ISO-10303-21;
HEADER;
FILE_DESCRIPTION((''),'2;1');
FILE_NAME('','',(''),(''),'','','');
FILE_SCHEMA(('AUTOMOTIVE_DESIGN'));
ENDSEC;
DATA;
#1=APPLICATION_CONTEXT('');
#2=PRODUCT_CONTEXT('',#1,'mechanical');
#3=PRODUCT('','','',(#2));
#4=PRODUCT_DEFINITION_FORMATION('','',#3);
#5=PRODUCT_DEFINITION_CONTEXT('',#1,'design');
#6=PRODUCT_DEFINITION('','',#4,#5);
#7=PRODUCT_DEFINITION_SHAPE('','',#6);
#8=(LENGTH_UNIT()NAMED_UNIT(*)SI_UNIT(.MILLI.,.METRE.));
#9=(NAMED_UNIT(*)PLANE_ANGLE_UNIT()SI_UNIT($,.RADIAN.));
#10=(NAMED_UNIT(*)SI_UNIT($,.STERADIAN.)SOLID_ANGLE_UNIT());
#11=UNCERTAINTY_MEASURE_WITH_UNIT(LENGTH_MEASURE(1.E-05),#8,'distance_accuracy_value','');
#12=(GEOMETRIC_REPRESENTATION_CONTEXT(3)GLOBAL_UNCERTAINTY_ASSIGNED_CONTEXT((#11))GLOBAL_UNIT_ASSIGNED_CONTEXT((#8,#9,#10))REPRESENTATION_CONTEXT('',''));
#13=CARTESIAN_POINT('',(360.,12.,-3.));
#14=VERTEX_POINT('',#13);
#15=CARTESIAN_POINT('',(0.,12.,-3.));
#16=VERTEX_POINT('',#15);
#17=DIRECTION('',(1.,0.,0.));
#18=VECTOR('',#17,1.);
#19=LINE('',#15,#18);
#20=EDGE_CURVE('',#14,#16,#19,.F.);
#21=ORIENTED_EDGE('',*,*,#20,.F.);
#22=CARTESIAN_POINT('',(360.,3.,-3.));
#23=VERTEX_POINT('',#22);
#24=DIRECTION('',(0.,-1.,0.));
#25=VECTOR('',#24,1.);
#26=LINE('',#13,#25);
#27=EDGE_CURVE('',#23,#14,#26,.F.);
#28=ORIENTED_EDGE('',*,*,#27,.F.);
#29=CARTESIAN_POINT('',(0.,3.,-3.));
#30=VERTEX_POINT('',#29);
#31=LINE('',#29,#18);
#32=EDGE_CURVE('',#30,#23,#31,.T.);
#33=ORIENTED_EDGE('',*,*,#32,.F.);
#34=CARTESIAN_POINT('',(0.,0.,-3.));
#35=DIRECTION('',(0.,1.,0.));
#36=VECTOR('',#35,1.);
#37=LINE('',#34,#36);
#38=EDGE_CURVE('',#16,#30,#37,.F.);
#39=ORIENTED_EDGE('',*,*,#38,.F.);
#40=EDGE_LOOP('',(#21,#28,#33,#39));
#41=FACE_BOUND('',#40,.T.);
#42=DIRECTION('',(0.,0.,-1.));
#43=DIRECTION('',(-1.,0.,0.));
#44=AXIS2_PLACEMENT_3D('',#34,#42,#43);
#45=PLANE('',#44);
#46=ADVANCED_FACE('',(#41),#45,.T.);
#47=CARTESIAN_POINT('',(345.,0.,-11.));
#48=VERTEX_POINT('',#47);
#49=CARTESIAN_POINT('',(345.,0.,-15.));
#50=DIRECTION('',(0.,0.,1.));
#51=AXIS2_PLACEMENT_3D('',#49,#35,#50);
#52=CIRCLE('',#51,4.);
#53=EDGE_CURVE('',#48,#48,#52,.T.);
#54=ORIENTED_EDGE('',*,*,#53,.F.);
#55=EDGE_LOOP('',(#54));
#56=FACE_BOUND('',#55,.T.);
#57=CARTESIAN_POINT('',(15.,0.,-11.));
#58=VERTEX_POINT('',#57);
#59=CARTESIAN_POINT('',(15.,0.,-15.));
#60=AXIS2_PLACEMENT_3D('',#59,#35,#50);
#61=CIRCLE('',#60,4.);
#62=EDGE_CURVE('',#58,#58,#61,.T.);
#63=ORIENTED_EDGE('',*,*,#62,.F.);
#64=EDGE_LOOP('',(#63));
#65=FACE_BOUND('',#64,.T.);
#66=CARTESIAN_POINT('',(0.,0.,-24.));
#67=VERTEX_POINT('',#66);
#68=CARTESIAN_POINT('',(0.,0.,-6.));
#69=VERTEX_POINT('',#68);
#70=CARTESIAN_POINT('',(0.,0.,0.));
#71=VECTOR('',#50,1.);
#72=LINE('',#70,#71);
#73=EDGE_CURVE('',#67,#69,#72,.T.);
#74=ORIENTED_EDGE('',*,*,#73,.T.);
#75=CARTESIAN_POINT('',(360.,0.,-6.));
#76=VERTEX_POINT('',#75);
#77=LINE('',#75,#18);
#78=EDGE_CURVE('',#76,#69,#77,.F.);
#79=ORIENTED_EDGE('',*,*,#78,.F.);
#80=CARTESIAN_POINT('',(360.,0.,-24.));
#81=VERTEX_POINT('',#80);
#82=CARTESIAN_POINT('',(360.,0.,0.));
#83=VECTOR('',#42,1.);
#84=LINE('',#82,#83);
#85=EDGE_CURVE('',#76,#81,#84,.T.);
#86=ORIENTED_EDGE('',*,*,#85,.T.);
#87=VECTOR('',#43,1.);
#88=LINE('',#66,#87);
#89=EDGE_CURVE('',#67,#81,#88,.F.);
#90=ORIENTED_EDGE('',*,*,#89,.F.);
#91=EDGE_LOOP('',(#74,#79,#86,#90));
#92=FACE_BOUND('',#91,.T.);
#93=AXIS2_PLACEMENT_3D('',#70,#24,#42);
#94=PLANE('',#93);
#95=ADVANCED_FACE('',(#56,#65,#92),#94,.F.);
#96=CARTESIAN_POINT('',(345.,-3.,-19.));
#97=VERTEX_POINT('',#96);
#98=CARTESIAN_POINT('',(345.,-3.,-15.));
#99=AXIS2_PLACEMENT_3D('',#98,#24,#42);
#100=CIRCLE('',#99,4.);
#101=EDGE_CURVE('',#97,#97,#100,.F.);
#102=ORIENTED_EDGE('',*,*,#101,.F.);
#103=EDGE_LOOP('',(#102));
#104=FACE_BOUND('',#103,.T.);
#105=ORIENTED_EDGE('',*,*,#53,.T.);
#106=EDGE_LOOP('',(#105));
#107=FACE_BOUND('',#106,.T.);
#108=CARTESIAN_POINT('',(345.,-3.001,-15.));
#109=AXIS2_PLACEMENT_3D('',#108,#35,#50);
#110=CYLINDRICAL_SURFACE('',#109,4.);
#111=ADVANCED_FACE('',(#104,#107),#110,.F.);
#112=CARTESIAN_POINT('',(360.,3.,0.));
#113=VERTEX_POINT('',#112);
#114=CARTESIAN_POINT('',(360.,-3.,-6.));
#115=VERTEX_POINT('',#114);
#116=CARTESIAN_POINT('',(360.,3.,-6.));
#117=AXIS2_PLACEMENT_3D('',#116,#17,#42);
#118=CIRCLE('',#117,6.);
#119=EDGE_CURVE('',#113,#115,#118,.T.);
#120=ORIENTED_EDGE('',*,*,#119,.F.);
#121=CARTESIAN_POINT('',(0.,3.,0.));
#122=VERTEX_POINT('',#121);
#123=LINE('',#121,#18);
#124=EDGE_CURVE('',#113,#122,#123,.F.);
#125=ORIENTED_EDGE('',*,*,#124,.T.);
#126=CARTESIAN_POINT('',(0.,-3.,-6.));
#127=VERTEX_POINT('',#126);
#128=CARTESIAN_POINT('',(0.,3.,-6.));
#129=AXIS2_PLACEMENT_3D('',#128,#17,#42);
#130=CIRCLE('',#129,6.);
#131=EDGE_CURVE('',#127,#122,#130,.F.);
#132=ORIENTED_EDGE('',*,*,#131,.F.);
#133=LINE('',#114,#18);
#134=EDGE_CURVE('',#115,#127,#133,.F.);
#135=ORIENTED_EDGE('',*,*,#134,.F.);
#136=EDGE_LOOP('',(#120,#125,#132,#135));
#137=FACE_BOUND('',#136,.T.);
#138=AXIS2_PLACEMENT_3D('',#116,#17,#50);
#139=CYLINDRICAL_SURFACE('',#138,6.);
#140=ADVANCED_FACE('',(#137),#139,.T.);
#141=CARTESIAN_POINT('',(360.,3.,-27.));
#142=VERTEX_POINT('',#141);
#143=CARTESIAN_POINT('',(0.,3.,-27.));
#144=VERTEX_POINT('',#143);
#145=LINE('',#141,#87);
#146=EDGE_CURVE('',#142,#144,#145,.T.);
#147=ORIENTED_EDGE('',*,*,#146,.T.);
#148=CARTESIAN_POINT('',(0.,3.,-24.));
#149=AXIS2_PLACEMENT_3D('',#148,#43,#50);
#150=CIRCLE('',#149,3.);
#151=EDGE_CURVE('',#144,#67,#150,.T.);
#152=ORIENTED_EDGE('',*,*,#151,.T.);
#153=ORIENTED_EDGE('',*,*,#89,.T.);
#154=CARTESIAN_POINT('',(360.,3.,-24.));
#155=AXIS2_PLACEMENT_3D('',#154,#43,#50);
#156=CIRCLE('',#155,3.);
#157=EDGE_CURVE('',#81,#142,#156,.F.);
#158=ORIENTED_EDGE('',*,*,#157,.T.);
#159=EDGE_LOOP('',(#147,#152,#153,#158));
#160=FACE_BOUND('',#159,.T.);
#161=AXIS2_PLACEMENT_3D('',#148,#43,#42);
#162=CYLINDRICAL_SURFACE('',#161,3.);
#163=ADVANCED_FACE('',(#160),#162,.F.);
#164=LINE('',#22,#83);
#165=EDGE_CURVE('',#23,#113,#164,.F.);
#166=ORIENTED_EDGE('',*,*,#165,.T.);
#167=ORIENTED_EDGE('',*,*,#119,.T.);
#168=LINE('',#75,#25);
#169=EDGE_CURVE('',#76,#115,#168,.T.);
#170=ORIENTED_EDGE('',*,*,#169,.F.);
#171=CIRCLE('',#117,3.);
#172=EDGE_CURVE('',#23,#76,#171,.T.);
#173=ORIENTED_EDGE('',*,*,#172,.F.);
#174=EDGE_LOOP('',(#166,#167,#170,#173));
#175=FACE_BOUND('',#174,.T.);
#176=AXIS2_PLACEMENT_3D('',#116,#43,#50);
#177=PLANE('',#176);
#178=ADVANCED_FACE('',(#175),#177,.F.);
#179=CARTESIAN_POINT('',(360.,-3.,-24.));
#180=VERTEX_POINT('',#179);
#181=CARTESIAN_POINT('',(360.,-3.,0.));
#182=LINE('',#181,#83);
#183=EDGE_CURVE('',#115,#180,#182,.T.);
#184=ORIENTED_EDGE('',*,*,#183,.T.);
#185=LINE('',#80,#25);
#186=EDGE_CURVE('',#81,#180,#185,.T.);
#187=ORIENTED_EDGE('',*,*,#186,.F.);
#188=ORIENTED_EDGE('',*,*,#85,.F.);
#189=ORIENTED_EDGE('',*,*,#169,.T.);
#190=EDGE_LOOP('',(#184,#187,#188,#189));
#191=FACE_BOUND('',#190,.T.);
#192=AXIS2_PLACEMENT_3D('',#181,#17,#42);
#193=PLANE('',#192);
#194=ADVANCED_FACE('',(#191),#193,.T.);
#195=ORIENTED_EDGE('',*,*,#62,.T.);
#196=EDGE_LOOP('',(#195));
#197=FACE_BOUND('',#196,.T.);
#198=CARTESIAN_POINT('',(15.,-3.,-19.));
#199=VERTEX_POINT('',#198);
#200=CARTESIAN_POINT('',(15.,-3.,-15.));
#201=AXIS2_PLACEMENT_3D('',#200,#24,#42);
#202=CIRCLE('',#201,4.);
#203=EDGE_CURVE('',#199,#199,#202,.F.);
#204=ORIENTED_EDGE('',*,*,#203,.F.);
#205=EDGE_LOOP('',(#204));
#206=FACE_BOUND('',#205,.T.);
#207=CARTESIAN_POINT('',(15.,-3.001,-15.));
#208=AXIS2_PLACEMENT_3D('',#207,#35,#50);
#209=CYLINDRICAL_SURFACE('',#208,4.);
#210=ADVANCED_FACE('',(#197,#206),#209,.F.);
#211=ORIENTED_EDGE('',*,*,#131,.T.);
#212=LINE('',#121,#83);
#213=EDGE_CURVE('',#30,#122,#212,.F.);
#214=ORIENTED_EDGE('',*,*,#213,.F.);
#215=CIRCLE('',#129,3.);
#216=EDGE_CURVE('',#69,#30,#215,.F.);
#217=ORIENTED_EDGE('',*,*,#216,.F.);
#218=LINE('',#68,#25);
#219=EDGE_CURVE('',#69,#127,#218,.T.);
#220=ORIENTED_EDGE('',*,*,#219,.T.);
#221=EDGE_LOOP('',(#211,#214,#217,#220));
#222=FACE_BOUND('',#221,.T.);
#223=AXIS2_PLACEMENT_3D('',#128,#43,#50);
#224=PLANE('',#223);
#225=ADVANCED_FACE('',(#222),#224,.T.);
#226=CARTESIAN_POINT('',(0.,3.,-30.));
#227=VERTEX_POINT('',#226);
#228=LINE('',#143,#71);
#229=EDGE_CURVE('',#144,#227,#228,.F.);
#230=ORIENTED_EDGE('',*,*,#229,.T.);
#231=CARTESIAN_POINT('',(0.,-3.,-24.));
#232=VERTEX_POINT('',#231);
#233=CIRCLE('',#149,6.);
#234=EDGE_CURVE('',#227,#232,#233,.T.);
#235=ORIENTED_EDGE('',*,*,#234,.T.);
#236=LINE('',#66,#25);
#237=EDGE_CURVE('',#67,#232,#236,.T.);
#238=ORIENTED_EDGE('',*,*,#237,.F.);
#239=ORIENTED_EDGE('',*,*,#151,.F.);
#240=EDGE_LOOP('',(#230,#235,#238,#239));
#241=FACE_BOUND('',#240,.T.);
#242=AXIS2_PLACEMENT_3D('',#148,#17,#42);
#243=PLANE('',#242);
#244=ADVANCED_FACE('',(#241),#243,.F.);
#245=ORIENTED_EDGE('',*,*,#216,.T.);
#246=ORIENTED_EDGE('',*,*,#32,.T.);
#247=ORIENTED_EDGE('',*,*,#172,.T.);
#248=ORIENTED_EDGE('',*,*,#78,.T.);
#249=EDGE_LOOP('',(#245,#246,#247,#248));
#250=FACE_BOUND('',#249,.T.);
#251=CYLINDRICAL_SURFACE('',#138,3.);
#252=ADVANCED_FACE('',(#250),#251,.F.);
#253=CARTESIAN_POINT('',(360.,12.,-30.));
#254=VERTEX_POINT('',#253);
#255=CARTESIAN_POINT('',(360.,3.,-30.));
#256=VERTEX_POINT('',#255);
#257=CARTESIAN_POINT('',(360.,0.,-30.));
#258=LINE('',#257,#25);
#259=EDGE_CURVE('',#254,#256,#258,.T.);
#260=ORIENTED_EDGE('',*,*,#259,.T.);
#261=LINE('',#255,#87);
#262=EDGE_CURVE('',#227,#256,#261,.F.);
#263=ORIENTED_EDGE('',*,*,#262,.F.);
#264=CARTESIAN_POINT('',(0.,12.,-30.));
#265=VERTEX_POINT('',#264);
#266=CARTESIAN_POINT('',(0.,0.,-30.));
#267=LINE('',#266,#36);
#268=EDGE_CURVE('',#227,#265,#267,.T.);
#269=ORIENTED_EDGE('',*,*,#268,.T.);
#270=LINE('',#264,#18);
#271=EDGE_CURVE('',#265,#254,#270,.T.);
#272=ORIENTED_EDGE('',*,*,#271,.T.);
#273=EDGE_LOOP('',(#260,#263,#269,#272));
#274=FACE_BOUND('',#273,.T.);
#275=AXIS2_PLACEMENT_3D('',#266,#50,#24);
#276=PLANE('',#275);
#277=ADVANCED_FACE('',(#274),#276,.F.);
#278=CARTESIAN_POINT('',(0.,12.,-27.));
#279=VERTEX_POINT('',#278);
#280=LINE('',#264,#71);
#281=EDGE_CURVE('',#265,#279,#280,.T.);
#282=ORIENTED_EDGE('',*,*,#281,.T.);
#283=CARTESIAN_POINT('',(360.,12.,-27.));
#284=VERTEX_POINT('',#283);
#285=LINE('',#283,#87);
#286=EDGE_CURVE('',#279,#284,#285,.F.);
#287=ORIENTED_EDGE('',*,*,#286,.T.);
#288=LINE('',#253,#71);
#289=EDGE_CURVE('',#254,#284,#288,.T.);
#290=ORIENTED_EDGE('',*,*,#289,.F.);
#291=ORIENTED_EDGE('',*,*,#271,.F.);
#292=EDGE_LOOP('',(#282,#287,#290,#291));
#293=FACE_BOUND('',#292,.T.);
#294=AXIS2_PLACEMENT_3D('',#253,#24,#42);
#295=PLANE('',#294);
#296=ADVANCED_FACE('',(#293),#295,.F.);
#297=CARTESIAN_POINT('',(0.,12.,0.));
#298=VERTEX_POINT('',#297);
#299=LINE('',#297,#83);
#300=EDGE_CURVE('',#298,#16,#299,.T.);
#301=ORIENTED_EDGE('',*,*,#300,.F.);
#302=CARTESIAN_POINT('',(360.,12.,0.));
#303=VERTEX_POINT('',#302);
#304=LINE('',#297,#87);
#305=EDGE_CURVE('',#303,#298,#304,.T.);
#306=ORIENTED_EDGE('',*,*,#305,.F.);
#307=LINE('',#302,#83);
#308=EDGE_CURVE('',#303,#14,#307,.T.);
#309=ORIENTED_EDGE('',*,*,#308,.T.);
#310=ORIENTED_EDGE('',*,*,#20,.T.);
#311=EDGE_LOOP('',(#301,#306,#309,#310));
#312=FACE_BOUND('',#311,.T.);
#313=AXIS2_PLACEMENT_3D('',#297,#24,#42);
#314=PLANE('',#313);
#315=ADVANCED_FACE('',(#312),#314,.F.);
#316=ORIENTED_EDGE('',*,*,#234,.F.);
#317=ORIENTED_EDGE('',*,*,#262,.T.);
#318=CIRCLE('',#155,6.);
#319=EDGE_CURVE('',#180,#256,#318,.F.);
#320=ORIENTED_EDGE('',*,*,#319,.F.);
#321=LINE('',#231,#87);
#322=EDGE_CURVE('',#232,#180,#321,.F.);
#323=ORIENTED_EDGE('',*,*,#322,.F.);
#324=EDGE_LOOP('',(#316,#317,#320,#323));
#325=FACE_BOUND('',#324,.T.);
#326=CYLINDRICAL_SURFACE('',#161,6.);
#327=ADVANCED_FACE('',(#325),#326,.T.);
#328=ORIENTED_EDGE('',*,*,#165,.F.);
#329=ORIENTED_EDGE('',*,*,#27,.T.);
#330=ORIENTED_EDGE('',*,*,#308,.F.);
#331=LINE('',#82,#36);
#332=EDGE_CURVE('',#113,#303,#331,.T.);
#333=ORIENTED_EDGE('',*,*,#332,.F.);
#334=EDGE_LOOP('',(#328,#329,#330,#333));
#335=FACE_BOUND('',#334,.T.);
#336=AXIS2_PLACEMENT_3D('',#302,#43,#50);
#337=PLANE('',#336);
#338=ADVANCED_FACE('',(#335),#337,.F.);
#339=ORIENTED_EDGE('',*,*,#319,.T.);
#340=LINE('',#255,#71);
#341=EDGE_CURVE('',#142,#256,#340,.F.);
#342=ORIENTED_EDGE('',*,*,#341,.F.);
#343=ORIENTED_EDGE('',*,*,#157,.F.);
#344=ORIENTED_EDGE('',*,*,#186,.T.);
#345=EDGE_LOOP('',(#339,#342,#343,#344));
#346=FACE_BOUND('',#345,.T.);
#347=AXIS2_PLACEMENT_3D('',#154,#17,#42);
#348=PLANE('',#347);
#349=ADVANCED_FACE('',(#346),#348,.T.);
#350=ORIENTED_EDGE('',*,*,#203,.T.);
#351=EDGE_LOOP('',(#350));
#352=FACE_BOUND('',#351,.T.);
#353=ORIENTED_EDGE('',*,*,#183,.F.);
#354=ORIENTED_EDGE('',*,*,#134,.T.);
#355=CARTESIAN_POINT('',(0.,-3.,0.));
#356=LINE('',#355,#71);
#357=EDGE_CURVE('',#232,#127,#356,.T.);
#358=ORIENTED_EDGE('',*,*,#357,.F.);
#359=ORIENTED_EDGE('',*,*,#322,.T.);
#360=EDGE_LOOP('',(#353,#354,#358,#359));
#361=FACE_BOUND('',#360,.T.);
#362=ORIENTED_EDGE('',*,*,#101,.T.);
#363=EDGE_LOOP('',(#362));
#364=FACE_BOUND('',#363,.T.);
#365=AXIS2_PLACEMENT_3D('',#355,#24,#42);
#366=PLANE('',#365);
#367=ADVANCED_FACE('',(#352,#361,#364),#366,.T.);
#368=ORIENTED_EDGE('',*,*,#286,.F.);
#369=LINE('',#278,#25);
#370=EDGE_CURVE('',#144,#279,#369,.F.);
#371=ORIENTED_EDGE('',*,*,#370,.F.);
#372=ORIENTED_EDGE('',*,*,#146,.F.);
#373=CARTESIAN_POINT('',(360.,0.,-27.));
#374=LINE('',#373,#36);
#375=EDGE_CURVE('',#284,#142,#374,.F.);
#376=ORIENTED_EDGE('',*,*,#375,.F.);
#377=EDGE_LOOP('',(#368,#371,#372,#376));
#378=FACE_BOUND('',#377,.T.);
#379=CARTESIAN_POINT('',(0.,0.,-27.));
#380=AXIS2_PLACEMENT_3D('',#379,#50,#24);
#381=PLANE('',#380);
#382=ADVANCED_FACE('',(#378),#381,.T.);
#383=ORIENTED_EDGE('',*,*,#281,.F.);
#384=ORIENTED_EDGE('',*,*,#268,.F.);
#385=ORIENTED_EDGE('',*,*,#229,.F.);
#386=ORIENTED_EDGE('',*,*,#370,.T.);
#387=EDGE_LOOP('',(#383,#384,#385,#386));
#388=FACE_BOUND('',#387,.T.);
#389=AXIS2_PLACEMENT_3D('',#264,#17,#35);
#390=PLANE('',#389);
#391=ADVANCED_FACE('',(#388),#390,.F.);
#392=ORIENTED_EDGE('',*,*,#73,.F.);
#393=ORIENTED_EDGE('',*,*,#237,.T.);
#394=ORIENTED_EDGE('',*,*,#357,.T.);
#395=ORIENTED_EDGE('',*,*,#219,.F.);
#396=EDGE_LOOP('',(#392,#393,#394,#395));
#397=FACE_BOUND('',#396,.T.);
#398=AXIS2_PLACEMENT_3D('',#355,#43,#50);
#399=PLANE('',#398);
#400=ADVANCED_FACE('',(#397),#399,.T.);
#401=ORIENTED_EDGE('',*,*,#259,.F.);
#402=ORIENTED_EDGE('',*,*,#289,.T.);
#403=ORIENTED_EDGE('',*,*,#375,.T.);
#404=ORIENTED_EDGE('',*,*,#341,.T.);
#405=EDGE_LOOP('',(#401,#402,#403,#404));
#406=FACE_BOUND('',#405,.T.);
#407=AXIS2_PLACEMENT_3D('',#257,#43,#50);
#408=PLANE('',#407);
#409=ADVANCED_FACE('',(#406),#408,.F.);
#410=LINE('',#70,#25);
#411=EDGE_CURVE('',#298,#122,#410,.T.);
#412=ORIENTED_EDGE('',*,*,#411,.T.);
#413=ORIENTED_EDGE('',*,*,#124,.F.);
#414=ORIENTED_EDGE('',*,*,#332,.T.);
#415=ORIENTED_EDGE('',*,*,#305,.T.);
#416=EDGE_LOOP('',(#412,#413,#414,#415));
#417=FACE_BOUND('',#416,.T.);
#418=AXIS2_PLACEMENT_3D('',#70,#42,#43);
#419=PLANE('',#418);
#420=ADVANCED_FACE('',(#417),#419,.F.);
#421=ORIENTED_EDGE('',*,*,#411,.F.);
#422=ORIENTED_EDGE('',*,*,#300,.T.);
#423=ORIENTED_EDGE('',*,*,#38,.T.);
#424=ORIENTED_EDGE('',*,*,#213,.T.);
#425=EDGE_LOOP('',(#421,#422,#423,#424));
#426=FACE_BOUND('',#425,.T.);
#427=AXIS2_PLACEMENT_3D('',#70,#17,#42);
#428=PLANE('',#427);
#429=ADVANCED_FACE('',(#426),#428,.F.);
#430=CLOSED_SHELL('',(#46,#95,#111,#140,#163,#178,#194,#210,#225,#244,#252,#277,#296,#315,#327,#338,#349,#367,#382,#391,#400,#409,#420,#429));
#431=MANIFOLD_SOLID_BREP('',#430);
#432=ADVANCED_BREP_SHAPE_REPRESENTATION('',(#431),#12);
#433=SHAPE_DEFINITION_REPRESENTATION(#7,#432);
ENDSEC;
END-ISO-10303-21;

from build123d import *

# Parameters (mm, degrees)
ESQUISSE2_W                             = 360
ESQUISSE2_H                             = 30
T_LE_DE_BASE_PLI_E1_DEPTH               = 3
T_LE_PLI_E_SUR_AR_TE1_STRIP_W           = 18
T_LE_PLI_E_SUR_AR_TE1_STRIP_H           = 3
T_LE_PLI_E_SUR_AR_TE1_STRIP_CUT_DEPTH   = 360
T_LE_PLI_E_SUR_AR_TE1_STRIP_2_W         = 18
T_LE_PLI_E_SUR_AR_TE1_STRIP_2_H         = 3
T_LE_PLI_E_SUR_AR_TE1_STRIP_CUT_2_DEPTH = 360
T_LE_PLI_E_SUR_AR_TE1_DEPTH             = 360
T_LE_PLI_E_SUR_AR_TE1_BEND_DEPTH        = 360
ENL_V_MAT_EXTRU_1_REACH                 = 363.447
ESQUISSE10_R                            = 4


# Sheet-metal steps are written as plain solids
with BuildPart() as part:
    # Esquisse2 → Tôle de base pliée1 (new body)
    with BuildSketch(Plane(origin=(0, 0, 0), x_dir=(1, 0, 0), z_dir=(0, 1, 0))):
        with Locations((180, 15)):
            Rectangle(ESQUISSE2_W, ESQUISSE2_H)
    extrude(amount=-T_LE_DE_BASE_PLI_E1_DEPTH)

    # Tôle pliée sur arête1 strip (across the edge) → Tôle pliée sur arête1 strip cut (cut)
    with BuildSketch(Plane(origin=(0, 0, 0), x_dir=(0, 0, -1), z_dir=(1, 0, 0))):
        with Locations((-3, -1.5)):
            Rectangle(T_LE_PLI_E_SUR_AR_TE1_STRIP_W, T_LE_PLI_E_SUR_AR_TE1_STRIP_H)
    extrude(amount=T_LE_PLI_E_SUR_AR_TE1_STRIP_CUT_DEPTH, mode=Mode.SUBTRACT)

    # Tôle pliée sur arête1 strip 2 (across the edge) → Tôle pliée sur arête1 strip cut 2 (cut)
    with BuildSketch(Plane(origin=(360, 0, -30), x_dir=(0, 0, 1), z_dir=(-1, 0, 0))):
        with Locations((-3, -1.5)):
            Rectangle(T_LE_PLI_E_SUR_AR_TE1_STRIP_2_W, T_LE_PLI_E_SUR_AR_TE1_STRIP_2_H)
    extrude(amount=T_LE_PLI_E_SUR_AR_TE1_STRIP_CUT_2_DEPTH, mode=Mode.SUBTRACT)

    # Tôle pliée sur arête1 section (across the edge) → Tôle pliée sur arête1 (add)
    with BuildSketch(Plane(origin=(0, 0, 0), x_dir=(0, 0, -1), z_dir=(1, 0, 0))):
        with BuildLine():
            Line((0, 3), (0, 12))
            Line((0, 12), (3, 12))
            Line((3, 12), (3, 3))
            ThreePointArc((3, 3), (3.878679656, 0.878679656), (6, 0))
            Line((6, 0), (6, -3))
            ThreePointArc((6, -3), (1.757359313, -1.242640687), (0, 3))
        make_face()
    extrude(amount=T_LE_PLI_E_SUR_AR_TE1_DEPTH)

    # Tôle pliée sur arête1 section 2 (across the edge) → Tôle pliée sur arête1 bend (add)
    with BuildSketch(Plane(origin=(360, 0, -30), x_dir=(0, 0, 1), z_dir=(-1, 0, 0))):
        with BuildLine():
            Line((0, 3), (0, 12))
            Line((0, 12), (3, 12))
            Line((3, 12), (3, 3))
            ThreePointArc((3, 3), (3.878679656, 0.878679656), (6, 0))
            Line((6, 0), (6, -3))
            ThreePointArc((6, -3), (1.757359313, -1.242640687), (0, 3))
        make_face()
    extrude(amount=T_LE_PLI_E_SUR_AR_TE1_BEND_DEPTH)

    # Esquisse10 → Enlèv. mat.-Extru.1 (cut, up to next)
    with BuildSketch(Plane(origin=(0, 0, 0), x_dir=(1, 0, 0), z_dir=(0, 1, 0)), mode=Mode.PRIVATE) as enl_v_mat_extru_1_sk1:
        with Locations(Location((15, 15, 0), (0, 0, 270))):
            Circle(ESQUISSE10_R)
    enl_v_mat_extru_1_tool1 = extrude(enl_v_mat_extru_1_sk1.sketch, amount=-ENL_V_MAT_EXTRU_1_REACH, mode=Mode.PRIVATE) & part.part
    # Esquisse10 → Enlèv. mat.-Extru.1 (cut, up to next)
    with BuildSketch(Plane(origin=(0, 0, 0), x_dir=(1, 0, 0), z_dir=(0, 1, 0)), mode=Mode.PRIVATE) as enl_v_mat_extru_1_sk2:
        with Locations(Location((345, 15, 0), (0, 0, 270))):
            Circle(ESQUISSE10_R)
    enl_v_mat_extru_1_tool2 = extrude(enl_v_mat_extru_1_sk2.sketch, amount=-ENL_V_MAT_EXTRU_1_REACH, mode=Mode.PRIVATE) & part.part
    add(enl_v_mat_extru_1_tool1.solids().sort_by_distance((15, 0, -15))[0], mode=Mode.SUBTRACT)
    add(enl_v_mat_extru_1_tool2.solids().sort_by_distance((345, 0, -15))[0], mode=Mode.SUBTRACT)


solid = part.part
